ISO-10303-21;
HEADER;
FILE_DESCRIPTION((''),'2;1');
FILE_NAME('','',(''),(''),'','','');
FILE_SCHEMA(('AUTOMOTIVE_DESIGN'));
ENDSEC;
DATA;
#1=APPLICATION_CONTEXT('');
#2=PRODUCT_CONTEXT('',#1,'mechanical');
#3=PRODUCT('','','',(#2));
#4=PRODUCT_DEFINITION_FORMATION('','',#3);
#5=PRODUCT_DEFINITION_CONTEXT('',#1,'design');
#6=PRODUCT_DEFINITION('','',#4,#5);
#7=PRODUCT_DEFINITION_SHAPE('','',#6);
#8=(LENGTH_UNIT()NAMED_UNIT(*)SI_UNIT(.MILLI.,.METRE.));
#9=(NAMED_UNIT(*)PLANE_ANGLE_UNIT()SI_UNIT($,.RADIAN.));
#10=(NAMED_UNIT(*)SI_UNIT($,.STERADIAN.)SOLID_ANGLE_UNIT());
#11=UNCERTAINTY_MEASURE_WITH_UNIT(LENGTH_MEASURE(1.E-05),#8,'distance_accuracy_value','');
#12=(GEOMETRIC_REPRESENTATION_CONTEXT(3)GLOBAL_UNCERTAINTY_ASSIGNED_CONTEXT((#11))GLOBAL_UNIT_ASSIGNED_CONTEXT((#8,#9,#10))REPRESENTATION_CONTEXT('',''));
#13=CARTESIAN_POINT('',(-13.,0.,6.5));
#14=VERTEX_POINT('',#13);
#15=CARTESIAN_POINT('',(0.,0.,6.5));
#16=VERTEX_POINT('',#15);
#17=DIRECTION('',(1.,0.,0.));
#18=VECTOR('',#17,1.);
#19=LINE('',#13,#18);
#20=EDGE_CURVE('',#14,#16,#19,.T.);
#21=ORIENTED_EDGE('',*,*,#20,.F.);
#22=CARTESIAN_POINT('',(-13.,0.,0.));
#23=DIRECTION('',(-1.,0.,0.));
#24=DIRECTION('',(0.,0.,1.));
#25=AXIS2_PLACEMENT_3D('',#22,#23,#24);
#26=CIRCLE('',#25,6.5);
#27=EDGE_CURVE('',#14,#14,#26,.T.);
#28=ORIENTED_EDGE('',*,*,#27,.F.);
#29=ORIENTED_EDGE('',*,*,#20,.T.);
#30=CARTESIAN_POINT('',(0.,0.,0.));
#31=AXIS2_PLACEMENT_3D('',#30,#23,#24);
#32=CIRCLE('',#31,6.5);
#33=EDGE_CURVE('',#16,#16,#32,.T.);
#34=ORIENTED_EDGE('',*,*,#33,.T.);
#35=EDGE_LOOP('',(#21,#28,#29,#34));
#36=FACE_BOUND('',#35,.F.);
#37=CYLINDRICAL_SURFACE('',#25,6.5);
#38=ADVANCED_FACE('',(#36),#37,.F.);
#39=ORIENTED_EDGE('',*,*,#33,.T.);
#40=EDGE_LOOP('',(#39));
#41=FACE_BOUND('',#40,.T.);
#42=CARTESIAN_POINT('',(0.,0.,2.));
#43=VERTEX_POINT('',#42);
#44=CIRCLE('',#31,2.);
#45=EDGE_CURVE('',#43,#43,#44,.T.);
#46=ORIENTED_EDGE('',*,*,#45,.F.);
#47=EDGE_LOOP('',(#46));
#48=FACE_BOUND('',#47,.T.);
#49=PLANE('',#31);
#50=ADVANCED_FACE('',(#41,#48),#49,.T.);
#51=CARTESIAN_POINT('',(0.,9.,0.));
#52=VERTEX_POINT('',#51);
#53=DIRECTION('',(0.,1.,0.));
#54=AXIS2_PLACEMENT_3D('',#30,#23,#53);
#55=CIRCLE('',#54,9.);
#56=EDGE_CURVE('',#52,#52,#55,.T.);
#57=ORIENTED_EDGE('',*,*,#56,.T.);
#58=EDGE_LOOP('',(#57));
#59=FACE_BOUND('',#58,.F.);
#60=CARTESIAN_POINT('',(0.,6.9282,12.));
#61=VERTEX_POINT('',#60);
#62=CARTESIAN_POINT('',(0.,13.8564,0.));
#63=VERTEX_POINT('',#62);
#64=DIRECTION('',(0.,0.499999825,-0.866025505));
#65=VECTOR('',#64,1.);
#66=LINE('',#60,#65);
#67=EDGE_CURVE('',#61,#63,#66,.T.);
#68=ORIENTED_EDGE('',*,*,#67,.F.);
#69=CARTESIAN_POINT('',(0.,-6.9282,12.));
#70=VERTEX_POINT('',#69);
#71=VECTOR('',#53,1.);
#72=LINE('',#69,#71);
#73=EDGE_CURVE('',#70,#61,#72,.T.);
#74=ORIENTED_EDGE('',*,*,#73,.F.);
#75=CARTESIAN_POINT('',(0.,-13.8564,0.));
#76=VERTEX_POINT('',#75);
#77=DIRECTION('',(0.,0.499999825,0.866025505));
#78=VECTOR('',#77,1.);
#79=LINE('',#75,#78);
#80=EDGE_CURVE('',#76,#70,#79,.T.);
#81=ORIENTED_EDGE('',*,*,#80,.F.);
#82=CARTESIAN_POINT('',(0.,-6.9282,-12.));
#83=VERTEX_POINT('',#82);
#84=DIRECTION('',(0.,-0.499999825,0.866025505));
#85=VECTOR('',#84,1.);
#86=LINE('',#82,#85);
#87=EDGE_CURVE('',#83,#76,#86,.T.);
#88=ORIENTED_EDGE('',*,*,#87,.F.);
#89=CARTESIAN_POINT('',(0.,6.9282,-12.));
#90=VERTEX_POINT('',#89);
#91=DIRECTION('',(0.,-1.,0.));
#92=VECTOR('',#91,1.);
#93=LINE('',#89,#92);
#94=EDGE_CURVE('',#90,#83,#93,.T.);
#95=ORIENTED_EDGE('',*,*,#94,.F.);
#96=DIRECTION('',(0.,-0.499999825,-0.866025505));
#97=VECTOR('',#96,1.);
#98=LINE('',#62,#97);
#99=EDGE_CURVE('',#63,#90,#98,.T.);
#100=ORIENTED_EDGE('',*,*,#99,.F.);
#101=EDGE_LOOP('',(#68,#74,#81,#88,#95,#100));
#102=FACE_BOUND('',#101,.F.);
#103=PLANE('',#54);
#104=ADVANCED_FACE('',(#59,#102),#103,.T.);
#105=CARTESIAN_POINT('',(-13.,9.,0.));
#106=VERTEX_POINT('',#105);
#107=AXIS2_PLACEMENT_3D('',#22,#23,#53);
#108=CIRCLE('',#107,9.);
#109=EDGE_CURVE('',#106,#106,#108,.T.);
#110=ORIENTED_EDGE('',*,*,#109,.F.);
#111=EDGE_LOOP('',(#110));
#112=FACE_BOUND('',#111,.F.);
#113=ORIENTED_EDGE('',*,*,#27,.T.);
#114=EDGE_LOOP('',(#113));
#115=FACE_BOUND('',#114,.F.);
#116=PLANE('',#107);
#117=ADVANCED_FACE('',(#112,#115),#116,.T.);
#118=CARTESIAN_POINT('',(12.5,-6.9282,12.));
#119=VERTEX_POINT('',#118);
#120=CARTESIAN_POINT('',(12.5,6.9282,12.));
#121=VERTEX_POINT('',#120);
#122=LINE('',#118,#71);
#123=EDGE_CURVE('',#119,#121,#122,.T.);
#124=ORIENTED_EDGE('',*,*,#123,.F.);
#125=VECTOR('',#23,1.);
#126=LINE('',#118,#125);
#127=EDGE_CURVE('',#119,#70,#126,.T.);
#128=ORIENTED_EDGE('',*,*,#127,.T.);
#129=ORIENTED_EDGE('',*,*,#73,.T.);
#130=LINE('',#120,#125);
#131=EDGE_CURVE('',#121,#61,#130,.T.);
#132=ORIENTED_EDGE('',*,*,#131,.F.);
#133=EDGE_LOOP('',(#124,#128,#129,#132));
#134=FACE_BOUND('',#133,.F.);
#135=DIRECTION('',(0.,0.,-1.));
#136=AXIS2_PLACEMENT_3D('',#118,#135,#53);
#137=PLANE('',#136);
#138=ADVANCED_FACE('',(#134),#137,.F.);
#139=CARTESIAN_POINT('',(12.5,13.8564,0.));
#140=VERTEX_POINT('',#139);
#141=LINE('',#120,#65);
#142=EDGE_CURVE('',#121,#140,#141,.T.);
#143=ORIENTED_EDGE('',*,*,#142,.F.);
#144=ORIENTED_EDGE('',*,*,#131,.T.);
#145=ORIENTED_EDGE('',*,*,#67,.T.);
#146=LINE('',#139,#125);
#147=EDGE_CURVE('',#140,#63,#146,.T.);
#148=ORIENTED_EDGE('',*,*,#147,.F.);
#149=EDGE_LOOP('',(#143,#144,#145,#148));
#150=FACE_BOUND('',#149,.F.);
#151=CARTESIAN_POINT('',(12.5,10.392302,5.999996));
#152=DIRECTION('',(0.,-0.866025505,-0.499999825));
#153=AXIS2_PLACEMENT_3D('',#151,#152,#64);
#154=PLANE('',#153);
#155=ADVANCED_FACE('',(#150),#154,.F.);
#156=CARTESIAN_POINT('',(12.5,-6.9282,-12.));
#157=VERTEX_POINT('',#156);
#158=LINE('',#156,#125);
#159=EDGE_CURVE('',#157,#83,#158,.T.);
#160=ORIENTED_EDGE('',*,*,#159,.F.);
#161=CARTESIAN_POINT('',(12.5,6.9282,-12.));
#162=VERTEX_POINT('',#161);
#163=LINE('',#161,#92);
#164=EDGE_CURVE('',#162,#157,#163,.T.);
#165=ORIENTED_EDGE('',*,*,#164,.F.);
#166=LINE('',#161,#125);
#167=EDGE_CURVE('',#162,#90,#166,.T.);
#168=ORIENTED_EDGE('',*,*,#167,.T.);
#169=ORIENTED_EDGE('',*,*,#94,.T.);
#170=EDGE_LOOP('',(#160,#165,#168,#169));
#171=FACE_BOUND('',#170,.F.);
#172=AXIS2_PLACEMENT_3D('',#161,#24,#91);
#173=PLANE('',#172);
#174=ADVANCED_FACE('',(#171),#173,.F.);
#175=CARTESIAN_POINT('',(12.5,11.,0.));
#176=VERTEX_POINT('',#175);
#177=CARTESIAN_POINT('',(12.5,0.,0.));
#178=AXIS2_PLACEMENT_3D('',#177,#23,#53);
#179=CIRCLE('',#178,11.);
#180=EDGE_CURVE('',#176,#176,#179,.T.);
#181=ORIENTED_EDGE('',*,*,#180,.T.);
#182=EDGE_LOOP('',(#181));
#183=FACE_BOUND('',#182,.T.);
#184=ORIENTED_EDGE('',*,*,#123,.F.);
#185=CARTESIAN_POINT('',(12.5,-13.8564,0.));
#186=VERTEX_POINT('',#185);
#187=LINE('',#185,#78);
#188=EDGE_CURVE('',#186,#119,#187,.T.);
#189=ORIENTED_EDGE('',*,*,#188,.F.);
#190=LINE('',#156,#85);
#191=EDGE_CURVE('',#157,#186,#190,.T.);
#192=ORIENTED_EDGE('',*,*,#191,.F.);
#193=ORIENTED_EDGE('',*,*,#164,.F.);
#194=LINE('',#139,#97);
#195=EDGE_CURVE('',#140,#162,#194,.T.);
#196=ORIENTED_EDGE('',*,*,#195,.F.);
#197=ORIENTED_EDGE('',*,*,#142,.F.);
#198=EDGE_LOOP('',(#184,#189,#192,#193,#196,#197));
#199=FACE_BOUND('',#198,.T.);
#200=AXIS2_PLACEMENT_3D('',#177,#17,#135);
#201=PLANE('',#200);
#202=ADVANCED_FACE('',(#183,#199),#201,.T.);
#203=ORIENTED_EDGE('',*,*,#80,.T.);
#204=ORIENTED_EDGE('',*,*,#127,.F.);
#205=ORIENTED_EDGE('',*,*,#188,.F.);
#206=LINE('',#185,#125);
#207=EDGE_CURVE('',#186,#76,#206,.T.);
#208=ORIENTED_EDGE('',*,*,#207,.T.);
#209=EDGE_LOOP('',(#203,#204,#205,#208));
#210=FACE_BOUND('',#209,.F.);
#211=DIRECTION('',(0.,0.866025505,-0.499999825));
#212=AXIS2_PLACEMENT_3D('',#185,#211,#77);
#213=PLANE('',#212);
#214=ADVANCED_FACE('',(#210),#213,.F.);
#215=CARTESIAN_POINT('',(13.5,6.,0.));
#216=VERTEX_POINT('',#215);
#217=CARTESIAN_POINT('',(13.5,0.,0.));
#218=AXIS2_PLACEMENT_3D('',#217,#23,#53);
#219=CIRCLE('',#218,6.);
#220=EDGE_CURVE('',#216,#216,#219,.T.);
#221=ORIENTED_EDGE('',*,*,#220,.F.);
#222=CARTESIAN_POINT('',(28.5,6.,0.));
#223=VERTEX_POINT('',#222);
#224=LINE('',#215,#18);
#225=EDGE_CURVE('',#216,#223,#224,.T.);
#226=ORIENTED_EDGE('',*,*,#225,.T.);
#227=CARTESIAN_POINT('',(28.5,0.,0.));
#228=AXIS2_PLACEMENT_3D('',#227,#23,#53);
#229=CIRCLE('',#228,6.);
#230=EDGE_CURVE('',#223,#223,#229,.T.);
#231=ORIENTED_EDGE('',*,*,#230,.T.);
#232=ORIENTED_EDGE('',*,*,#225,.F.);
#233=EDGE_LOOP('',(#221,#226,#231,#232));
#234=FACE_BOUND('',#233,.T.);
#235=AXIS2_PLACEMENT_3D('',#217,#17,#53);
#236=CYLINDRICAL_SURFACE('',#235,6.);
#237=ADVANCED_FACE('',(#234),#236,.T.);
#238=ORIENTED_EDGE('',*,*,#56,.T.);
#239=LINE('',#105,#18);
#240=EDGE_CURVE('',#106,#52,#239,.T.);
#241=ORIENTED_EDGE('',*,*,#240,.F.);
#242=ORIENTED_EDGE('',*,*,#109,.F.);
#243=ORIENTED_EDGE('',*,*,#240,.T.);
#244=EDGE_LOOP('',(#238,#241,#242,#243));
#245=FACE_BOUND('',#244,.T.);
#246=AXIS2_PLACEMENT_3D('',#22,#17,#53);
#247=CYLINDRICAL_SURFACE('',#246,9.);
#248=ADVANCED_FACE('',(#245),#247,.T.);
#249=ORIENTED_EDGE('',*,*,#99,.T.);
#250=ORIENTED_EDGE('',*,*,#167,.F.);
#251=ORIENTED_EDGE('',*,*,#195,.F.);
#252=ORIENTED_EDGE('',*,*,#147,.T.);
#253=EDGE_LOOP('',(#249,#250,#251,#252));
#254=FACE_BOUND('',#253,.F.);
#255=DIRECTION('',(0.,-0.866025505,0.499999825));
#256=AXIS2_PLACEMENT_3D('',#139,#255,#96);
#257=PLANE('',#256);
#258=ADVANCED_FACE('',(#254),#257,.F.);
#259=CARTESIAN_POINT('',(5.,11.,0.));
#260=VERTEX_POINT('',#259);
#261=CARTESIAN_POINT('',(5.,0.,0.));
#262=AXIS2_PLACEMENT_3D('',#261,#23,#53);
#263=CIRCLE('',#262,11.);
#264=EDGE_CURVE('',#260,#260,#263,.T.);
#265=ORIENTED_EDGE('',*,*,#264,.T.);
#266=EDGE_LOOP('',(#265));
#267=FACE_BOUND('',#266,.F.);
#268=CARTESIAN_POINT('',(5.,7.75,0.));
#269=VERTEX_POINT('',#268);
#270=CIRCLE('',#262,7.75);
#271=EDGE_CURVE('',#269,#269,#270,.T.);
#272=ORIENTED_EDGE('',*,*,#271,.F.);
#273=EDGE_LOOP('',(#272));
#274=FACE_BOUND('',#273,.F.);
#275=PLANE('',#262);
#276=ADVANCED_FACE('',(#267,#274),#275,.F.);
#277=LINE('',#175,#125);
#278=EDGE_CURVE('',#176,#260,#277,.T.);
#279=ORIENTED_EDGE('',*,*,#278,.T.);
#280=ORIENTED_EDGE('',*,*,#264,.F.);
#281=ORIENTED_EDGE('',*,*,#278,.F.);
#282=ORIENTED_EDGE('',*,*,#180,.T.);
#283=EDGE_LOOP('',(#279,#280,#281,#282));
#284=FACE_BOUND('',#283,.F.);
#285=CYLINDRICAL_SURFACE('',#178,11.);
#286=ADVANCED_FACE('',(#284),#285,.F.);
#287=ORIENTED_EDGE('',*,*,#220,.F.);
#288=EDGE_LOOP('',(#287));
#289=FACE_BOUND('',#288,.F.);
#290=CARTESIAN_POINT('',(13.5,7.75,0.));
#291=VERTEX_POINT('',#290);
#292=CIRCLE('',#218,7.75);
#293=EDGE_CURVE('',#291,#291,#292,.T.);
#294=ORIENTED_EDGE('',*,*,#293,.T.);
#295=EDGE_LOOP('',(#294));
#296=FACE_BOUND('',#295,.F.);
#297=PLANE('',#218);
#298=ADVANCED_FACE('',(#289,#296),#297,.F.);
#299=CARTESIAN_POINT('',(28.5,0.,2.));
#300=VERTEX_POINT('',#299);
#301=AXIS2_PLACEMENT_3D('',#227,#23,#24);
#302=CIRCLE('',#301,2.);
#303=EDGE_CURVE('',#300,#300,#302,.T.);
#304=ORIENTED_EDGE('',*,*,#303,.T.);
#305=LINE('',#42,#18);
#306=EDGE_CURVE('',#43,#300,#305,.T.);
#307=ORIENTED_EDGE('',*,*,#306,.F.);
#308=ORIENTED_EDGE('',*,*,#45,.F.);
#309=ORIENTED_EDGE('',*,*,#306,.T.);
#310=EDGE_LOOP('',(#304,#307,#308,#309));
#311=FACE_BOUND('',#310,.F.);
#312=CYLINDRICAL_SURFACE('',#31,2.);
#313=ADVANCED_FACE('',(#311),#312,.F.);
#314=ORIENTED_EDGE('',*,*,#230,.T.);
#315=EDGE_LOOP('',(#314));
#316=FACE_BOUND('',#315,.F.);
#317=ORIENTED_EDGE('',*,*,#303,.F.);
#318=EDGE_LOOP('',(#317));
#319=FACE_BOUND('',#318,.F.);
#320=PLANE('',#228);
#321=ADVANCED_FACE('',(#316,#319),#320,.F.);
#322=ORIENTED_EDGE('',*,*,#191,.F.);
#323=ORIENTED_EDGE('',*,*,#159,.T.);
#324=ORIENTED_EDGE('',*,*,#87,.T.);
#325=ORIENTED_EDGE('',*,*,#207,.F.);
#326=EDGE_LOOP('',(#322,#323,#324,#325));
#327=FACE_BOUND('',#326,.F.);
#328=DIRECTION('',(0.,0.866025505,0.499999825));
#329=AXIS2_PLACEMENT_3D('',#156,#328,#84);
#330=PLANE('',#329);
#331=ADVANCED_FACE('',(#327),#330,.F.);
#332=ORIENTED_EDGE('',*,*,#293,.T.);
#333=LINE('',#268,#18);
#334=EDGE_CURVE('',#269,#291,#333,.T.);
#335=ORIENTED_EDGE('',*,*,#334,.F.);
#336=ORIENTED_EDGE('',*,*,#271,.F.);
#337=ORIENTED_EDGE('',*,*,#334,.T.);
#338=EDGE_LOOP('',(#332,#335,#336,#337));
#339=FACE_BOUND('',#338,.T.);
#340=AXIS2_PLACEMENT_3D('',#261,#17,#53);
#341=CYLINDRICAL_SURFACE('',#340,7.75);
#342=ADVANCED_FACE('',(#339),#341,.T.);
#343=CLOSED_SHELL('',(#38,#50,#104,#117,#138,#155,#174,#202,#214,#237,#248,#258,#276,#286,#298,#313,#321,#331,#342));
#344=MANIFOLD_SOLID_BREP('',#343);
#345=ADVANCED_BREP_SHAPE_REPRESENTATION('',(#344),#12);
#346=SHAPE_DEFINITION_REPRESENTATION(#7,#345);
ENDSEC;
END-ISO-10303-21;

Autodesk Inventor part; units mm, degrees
ref_plane "YZ Plane" through (0, 0, 0) normal (1, 0, 0) x (0, 1, 0)
ref_plane "XZ Plane" through (0, 0, 0) normal (0, 1, 0) x (-1, 0, 0)
ref_plane "XY Plane" through (0, 0, 0) normal (0, 0, 1) x (1, 0, 0)
sketch "Sketch1" plane through (0, 0, 0) normal (0, 0, 1) x (1, 0, 0)
  line L0 (0, 0) -> (-13, 0)
  line L1 (-13, 0) -> (-13, 9)
  line L2 (-13, 9) -> (0, 9)
  line L3 (0, 9) -> (0, 12)
  line L4 (0, 12) -> (12.5, 12)
  line L5 (12.5, 12) -> (12.5, 11)
  line L6 (12.5, 11) -> (5, 11)
  line L7 (5, 11) -> (5, 7.75)
  line L8 (5, 7.75) -> (13.5, 7.75)
  line L9 (13.5, 7.75) -> (13.5, 6)
  line L10 (13.5, 6) -> (28.5, 6)
  line L11 (28.5, 6) -> (28.5, 0)
  line L12 (28.5, 0) -> (0, 0)
  dimension "d0" = 13
  dimension "d1" = 9
  dimension "d2" = 13
  dimension "d3" = 3
  dimension "d4" = 12.5
  dimension "d5" = 1
  dimension "d6" = 7.5
  dimension "d7" = 3.25
  dimension "d8" = 8.5
  dimension "d9" = 1.75
  dimension "d10" = 15
revolve "Revolution1" add sketch "Sketch1" angle 360 about axis through (28.5, 0, 0) along (-1, 0, 0)
sketch "Sketch2" plane through (12.5, 0, 0) normal (1, 0, 0) x (0, 0, -1)
  circle A0 centre (0, 0) radius 12 projected
  line L0 (12, -6.9282) -> (0, -13.8564)
  line L1 (0, -13.8564) -> (-12, -6.9282)
  line L2 (-12, -6.9282) -> (-12, 6.9282)
  line L3 (-12, 6.9282) -> (0, 13.8564)
  line L4 (0, 13.8564) -> (12, 6.9282)
  line L5 (12, 6.9282) -> (12, -6.9282)
  circle A1 centre (0, 0) radius 11
  point P0 (12, 0)
  point P1 (6, 10.3923)
  point P2 (6, -10.3923)
  point P3 (-6, 10.3923)
  point P4 (-12, 0)
  point P5 (-6, -10.3923)
  dimension "d12" = 24
  dimension "d13" = 0
extrude "Extrusion1" add sketch "Sketch2" against normal blind 12.5 contours L5 L0 A0 | A0 L4 L5 | A0 L3 L4 | L0 L1 A0 | A0 L2 L3 | L1 L2 A0
thread "Thread1" size "M18x1" class "6g" standard "ANSI Metric M Profile" length 7 offset 6.5
sketch "Sketch3" plane through (-13, 0, 0) normal (-1, 0, 0) x (0, 0, 1)
  circle A0 centre (0, 0) radius 7.75 projected
  circle A1 centre (0, 0) radius 6.5
  dimension "d18" = 13
extrude "Extrusion2" cut sketch "Sketch3" against normal blind 13 contours A1
sketch "Sketch4" plane through (0, 0, 0) normal (-1, 0, 0) x (0, 0, 1)
  circle A0 centre (0, 0) radius 2
  dimension "d21" = 4
extrude "Extrusion3" cut sketch "Sketch4" against normal through all
thread "Thread2" size "M4x0.7" class "6H" standard "ANSI Metric M Profile" length 28.5
properties part number "HEX HUB ver 1"
